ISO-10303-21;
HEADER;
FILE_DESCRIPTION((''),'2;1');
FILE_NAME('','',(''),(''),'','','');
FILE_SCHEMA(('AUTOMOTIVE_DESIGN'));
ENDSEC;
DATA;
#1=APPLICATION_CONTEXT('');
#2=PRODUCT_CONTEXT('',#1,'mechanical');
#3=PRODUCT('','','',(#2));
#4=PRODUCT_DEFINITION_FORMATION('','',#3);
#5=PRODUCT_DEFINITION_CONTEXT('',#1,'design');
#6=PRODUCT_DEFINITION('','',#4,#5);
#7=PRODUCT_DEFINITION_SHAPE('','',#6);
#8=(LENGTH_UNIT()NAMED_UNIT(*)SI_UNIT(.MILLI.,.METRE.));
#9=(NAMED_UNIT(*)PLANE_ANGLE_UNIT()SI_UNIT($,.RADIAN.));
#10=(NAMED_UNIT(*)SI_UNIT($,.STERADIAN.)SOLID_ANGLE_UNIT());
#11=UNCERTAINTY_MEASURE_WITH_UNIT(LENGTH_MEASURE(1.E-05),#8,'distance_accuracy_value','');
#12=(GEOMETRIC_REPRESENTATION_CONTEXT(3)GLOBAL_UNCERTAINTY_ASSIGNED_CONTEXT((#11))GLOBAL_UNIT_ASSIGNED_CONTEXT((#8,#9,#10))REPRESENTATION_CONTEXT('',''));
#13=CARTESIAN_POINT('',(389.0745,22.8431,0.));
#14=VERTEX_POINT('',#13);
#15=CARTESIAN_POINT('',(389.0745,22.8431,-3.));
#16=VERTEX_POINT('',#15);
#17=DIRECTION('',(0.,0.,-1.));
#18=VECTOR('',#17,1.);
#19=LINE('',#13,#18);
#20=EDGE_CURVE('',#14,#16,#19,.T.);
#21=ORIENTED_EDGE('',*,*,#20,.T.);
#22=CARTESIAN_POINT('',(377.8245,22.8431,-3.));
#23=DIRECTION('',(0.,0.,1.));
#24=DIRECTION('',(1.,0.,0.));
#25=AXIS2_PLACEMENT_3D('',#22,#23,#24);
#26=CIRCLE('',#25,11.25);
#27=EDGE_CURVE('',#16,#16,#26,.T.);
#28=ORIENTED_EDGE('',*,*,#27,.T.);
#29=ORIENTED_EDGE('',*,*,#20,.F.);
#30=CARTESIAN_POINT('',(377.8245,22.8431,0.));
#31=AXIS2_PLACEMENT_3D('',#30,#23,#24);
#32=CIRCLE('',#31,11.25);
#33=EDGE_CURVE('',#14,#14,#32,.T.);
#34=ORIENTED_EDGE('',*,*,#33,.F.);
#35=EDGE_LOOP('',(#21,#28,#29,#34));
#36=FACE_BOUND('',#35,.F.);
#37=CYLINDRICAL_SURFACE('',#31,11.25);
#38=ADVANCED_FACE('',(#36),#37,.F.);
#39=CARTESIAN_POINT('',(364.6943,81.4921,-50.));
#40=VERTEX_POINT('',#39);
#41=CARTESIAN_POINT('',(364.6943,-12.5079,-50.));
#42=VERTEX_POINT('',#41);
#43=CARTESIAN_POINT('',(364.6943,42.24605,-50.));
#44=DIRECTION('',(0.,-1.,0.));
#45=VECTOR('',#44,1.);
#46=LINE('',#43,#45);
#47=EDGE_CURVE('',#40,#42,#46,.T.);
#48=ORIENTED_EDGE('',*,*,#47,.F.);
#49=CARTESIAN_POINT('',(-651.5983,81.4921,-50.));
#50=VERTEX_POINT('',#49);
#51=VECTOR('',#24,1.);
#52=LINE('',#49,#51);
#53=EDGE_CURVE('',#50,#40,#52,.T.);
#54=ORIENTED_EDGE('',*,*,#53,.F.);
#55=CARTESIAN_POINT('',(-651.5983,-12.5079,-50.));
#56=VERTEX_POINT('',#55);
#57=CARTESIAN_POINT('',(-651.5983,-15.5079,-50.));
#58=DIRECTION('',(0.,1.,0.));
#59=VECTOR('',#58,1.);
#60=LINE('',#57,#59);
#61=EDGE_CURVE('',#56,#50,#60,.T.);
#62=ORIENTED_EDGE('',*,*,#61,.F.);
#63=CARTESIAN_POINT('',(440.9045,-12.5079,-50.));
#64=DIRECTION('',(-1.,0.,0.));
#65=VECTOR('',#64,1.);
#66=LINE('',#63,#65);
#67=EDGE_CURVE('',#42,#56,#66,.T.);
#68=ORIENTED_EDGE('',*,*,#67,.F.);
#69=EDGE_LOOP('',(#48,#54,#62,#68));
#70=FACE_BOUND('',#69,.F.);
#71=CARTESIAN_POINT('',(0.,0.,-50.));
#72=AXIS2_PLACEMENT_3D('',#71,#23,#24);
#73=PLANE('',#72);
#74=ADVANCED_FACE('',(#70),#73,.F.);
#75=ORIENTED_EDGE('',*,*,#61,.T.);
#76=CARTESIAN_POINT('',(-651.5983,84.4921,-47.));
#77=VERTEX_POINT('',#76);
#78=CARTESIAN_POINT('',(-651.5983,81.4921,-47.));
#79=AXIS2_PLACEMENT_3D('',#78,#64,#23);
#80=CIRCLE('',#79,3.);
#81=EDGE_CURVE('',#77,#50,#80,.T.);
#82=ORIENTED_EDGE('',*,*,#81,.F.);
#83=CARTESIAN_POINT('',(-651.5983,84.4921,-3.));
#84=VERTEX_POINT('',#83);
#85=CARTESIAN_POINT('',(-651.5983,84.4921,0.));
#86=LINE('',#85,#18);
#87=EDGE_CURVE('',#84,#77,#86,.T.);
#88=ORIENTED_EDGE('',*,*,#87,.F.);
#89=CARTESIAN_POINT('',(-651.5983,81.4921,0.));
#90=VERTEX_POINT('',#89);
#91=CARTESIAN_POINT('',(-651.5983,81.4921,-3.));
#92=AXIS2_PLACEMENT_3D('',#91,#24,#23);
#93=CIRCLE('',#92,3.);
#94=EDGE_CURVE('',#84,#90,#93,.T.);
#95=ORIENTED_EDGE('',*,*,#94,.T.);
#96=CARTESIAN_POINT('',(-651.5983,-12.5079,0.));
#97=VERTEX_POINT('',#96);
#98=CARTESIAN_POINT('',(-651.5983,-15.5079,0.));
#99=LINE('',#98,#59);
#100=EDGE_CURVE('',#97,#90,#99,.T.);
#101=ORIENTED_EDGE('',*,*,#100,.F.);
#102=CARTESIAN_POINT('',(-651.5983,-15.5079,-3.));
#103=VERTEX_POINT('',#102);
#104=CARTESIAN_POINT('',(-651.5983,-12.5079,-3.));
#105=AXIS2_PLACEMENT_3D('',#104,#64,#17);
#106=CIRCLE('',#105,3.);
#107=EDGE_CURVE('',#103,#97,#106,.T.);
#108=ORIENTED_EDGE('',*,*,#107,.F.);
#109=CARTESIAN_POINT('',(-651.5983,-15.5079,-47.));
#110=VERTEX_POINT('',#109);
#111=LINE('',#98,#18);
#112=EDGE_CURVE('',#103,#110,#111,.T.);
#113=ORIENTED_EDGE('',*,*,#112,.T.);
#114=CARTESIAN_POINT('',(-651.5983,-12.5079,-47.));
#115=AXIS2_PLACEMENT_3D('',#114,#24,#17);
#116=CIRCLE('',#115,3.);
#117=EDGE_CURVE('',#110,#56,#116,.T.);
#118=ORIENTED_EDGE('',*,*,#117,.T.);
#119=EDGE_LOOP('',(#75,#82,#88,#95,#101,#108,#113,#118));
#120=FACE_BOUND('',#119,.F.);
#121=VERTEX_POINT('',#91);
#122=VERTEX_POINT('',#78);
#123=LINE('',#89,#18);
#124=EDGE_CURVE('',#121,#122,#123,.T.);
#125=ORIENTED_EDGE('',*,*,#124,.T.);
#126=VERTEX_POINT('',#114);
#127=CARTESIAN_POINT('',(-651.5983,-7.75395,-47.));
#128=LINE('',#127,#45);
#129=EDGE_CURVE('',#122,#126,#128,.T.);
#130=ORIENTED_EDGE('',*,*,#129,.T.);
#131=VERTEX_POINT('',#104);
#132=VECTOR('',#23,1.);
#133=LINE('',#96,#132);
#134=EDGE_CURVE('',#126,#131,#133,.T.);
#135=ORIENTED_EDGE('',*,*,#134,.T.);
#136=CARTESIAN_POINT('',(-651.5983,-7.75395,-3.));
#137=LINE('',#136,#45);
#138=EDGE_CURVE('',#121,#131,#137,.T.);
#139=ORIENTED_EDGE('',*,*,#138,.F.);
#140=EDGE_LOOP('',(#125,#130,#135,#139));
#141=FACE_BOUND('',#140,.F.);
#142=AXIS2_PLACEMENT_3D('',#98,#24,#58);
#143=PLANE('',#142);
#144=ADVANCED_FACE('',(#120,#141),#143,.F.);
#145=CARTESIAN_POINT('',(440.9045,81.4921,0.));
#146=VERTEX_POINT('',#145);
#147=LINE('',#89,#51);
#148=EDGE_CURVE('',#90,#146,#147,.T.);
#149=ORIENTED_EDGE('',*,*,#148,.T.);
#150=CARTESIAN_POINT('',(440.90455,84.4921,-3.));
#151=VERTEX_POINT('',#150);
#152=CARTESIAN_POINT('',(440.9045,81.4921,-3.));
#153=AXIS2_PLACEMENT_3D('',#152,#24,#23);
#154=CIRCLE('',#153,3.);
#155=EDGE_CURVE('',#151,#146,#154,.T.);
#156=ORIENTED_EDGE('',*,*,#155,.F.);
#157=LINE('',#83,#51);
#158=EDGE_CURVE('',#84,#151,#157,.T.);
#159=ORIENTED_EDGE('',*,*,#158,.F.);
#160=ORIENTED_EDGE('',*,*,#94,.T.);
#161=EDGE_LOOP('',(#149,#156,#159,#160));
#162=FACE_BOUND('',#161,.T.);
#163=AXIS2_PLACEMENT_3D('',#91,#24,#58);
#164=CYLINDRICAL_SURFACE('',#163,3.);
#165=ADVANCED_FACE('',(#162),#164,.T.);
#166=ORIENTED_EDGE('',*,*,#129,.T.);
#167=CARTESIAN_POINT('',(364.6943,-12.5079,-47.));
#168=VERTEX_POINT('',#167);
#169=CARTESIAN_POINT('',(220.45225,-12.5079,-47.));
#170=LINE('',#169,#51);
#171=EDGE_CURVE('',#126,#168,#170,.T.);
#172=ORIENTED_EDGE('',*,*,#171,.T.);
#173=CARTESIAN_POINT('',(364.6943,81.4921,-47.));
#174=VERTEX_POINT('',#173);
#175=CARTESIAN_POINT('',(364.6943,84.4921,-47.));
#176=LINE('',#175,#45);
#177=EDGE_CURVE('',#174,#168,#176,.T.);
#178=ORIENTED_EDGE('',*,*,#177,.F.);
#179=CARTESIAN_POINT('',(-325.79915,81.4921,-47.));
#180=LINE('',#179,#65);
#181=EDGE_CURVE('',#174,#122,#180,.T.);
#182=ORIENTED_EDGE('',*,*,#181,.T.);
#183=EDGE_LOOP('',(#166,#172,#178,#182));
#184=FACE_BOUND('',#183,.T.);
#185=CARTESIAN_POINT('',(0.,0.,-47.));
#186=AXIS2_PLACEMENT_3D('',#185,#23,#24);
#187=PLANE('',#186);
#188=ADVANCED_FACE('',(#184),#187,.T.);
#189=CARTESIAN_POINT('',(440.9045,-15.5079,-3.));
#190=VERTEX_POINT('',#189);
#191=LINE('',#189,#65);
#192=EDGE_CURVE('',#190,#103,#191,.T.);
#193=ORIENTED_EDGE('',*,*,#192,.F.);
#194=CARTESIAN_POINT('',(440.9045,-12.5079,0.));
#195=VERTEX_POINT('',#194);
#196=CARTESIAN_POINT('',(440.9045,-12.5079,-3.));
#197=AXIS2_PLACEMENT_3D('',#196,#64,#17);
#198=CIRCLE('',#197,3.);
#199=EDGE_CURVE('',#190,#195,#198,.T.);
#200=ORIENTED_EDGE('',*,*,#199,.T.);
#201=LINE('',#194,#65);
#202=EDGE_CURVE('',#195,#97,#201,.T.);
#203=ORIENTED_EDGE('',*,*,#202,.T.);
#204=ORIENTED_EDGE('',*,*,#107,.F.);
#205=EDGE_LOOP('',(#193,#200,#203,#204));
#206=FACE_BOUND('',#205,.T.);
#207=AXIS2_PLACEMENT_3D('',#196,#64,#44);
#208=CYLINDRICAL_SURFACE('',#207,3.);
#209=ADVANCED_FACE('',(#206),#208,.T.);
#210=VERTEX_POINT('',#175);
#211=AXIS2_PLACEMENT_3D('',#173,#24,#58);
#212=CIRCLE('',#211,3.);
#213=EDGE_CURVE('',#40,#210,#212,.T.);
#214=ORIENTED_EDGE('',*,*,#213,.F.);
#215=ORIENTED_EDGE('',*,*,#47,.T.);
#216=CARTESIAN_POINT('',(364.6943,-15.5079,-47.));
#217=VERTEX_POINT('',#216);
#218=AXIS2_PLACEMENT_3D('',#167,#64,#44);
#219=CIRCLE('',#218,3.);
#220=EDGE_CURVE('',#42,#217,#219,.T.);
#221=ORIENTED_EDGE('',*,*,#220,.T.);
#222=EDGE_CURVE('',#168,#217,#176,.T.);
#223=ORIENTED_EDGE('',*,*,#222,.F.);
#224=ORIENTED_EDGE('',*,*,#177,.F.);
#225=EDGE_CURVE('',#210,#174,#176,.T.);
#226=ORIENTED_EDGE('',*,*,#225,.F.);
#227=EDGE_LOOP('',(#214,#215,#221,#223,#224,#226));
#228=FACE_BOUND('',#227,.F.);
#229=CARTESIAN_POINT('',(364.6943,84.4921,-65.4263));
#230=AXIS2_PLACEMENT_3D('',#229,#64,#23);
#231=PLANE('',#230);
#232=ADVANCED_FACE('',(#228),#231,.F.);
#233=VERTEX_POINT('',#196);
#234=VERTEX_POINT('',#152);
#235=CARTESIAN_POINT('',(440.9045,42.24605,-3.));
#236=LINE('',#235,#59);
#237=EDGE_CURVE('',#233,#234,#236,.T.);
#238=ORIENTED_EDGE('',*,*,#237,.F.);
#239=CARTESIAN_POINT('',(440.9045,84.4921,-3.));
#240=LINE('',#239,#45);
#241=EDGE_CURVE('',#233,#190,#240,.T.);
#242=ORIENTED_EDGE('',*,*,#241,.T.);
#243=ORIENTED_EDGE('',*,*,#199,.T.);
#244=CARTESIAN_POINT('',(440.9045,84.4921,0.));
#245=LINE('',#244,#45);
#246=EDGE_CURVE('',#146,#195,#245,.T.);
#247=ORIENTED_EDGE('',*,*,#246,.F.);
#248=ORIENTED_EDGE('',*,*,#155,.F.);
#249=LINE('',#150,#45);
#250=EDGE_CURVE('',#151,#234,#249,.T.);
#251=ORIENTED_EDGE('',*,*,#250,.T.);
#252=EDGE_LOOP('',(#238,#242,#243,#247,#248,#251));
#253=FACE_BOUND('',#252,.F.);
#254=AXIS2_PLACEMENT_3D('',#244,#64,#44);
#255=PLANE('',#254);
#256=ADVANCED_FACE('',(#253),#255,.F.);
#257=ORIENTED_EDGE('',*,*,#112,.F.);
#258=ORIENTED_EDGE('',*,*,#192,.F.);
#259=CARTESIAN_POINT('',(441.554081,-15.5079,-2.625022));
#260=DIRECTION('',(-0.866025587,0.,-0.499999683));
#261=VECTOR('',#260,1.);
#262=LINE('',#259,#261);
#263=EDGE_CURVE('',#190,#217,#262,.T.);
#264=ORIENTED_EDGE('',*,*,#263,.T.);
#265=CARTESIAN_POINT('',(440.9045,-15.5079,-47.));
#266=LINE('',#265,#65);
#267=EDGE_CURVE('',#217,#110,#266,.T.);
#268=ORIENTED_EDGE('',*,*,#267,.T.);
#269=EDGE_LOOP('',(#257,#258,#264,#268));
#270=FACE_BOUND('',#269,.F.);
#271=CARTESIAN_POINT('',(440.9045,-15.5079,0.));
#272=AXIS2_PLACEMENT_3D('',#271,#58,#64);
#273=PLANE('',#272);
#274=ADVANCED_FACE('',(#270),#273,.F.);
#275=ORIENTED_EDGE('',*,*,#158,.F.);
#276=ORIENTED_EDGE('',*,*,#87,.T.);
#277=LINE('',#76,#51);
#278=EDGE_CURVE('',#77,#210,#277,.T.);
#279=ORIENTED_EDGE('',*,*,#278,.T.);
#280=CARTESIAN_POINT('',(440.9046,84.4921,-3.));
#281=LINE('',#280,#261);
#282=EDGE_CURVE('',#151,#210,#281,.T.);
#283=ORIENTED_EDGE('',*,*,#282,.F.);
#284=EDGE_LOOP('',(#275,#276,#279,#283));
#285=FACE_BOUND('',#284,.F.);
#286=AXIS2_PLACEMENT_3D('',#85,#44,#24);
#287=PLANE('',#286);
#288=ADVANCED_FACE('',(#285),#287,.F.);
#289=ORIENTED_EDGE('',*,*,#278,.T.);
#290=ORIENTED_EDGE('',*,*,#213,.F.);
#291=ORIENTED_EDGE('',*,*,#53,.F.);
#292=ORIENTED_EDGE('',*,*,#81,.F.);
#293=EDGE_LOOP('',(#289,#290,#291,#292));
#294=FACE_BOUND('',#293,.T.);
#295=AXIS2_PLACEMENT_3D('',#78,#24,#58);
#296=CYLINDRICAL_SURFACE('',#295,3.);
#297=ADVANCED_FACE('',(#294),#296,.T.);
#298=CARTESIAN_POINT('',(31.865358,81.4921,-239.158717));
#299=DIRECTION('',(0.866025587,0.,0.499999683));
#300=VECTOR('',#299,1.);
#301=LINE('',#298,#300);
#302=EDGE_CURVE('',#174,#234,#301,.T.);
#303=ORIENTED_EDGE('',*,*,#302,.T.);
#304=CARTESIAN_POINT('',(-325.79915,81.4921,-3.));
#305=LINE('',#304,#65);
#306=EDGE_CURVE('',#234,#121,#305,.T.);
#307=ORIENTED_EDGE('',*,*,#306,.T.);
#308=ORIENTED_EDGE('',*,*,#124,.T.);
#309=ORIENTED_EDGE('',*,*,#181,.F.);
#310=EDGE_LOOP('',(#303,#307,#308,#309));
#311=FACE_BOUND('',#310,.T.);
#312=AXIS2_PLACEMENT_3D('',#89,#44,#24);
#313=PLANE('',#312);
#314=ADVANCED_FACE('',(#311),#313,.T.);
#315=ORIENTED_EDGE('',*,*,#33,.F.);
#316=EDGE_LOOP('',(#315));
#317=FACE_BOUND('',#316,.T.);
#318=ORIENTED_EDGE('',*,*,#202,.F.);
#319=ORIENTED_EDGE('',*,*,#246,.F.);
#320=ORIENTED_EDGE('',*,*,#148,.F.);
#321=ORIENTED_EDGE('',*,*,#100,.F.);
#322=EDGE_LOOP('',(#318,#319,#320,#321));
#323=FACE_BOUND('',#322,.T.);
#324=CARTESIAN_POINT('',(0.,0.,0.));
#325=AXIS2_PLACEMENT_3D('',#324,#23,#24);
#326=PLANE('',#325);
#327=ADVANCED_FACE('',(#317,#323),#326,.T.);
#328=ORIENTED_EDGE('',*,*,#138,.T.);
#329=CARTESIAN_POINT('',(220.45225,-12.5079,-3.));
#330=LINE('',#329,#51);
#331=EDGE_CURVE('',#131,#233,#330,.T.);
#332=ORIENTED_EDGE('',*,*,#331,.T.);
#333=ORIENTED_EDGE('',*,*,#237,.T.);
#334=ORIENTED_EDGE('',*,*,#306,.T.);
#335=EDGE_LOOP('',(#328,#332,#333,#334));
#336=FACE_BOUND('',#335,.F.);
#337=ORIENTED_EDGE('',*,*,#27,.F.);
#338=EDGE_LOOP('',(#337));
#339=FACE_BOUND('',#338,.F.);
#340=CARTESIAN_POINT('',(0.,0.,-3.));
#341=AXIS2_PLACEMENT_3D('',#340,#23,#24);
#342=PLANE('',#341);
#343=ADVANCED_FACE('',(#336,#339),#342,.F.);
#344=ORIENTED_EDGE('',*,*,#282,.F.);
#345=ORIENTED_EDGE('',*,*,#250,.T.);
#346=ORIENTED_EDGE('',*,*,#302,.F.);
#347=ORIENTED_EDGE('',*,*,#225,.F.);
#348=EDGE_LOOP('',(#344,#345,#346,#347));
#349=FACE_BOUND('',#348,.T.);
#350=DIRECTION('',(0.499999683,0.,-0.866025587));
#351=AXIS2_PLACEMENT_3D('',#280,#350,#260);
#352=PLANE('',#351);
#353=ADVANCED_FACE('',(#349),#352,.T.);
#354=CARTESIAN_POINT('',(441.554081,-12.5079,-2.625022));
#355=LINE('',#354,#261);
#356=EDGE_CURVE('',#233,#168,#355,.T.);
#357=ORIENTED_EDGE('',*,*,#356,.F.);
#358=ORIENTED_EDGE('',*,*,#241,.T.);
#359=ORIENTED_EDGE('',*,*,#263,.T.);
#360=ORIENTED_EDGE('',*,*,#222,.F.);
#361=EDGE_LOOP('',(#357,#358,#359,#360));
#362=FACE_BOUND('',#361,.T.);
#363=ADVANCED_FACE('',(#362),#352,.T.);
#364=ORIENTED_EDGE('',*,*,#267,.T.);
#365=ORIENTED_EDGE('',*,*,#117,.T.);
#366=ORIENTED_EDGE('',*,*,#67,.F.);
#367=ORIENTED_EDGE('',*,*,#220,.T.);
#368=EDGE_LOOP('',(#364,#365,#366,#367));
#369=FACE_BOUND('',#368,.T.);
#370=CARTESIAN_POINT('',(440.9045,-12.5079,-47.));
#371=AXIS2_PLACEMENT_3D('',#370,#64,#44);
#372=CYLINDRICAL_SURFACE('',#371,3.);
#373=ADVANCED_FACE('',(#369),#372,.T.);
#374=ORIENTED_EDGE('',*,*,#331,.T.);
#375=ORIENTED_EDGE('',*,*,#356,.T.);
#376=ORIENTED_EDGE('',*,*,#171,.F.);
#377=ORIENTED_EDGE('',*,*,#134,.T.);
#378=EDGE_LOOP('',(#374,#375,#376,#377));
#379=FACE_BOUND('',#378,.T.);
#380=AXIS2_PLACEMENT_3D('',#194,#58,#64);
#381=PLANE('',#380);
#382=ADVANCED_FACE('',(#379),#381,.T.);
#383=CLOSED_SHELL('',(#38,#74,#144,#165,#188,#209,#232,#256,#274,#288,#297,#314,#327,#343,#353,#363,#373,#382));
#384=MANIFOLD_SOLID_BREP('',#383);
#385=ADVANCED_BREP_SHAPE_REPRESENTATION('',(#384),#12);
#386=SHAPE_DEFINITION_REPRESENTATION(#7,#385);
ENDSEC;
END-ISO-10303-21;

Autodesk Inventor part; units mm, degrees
ref_plane "YZ Plane" through (0, 0, 0) normal (1, 0, 0) x (0, 1, 0)
ref_plane "XZ Plane" through (0, 0, 0) normal (0, 1, 0) x (-1, 0, 0)
ref_plane "XY Plane" through (0, 0, 0) normal (0, 0, 1) x (1, 0, 0)
sketch "Sketch1" plane through (0, 0, 0) normal (0, 0, 1) x (1, 0, 0)
  line L0 (-651.5983, 84.4921) -> (440.9045, 84.4921)
  line L1 (440.9045, 84.4921) -> (440.9045, -15.5079)
  line L2 (440.9045, -15.5079) -> (-651.5983, -15.5079)
  line L3 (-651.5983, -15.5079) -> (-651.5983, 84.4921)
  line L4 (-651.5983, -15.5079) -> (-899.2765, -81.873) projected
  point P0 (0, 0)
  dimension "d0" = 100
extrude "Extrusion1" add sketch "Sketch1" against normal blind 50
fillet "Fillet1" radius 3 4 edges at (-105.3469, 84.4921, 0) (-105.3469, 84.4921, -50) (-105.3469, -15.5079, 0) (-105.3469, -15.5079, -50)
shell "Shell1" thickness 3 removed faces 2 at (440.9045, 18.8255, -33.3333) at (-651.5983, 18.8255, -33.3333)
sketch "Sketch2" plane through (0, 0, 0) normal (0, 0, 1) x (1, 0, 0)
  circle A0 centre (377.8245, 22.8431) radius 11.25 projected
  point P0 (0, 0)
extrude "Extrusion2" cut sketch "Sketch2" against normal through all
sketch "Sketch3" plane through (-651.5983, 84.4921, -47) normal (0, 1, 0) x (1, 0, 0)
  line L0 (0, 0) -> (1092.5029, 0) projected
  line L1 (0, -44) -> (0, 0) projected
  line L2 (1092.5029, -44) -> (0, -44) projected
  line L3 (1092.5029, -44) -> (1092.5029, 0) projected
  line L4 (1092.5029, -44) -> (1016.2926, 0)
  line L5 (0, 0) -> (1092.5029, 0) projected
  line L6 (1092.5029, -44) -> (1101.6667, -44)
  line L7 (1101.6667, -44) -> (1101.6667, 18.4263)
  line L8 (1101.6667, 18.4263) -> (1016.2926, 18.4263)
  line L9 (1016.2926, 18.4263) -> (1016.2926, 0)
  point P0 (651.5983, -47)
  dimension "d8" = 30
extrude "Extrusion3" cut sketch "Sketch3" against normal through all contours L9 L8 L7 L6 L3 L0 | L0 L3 L4
properties part number "Barra nuevo pivote"
